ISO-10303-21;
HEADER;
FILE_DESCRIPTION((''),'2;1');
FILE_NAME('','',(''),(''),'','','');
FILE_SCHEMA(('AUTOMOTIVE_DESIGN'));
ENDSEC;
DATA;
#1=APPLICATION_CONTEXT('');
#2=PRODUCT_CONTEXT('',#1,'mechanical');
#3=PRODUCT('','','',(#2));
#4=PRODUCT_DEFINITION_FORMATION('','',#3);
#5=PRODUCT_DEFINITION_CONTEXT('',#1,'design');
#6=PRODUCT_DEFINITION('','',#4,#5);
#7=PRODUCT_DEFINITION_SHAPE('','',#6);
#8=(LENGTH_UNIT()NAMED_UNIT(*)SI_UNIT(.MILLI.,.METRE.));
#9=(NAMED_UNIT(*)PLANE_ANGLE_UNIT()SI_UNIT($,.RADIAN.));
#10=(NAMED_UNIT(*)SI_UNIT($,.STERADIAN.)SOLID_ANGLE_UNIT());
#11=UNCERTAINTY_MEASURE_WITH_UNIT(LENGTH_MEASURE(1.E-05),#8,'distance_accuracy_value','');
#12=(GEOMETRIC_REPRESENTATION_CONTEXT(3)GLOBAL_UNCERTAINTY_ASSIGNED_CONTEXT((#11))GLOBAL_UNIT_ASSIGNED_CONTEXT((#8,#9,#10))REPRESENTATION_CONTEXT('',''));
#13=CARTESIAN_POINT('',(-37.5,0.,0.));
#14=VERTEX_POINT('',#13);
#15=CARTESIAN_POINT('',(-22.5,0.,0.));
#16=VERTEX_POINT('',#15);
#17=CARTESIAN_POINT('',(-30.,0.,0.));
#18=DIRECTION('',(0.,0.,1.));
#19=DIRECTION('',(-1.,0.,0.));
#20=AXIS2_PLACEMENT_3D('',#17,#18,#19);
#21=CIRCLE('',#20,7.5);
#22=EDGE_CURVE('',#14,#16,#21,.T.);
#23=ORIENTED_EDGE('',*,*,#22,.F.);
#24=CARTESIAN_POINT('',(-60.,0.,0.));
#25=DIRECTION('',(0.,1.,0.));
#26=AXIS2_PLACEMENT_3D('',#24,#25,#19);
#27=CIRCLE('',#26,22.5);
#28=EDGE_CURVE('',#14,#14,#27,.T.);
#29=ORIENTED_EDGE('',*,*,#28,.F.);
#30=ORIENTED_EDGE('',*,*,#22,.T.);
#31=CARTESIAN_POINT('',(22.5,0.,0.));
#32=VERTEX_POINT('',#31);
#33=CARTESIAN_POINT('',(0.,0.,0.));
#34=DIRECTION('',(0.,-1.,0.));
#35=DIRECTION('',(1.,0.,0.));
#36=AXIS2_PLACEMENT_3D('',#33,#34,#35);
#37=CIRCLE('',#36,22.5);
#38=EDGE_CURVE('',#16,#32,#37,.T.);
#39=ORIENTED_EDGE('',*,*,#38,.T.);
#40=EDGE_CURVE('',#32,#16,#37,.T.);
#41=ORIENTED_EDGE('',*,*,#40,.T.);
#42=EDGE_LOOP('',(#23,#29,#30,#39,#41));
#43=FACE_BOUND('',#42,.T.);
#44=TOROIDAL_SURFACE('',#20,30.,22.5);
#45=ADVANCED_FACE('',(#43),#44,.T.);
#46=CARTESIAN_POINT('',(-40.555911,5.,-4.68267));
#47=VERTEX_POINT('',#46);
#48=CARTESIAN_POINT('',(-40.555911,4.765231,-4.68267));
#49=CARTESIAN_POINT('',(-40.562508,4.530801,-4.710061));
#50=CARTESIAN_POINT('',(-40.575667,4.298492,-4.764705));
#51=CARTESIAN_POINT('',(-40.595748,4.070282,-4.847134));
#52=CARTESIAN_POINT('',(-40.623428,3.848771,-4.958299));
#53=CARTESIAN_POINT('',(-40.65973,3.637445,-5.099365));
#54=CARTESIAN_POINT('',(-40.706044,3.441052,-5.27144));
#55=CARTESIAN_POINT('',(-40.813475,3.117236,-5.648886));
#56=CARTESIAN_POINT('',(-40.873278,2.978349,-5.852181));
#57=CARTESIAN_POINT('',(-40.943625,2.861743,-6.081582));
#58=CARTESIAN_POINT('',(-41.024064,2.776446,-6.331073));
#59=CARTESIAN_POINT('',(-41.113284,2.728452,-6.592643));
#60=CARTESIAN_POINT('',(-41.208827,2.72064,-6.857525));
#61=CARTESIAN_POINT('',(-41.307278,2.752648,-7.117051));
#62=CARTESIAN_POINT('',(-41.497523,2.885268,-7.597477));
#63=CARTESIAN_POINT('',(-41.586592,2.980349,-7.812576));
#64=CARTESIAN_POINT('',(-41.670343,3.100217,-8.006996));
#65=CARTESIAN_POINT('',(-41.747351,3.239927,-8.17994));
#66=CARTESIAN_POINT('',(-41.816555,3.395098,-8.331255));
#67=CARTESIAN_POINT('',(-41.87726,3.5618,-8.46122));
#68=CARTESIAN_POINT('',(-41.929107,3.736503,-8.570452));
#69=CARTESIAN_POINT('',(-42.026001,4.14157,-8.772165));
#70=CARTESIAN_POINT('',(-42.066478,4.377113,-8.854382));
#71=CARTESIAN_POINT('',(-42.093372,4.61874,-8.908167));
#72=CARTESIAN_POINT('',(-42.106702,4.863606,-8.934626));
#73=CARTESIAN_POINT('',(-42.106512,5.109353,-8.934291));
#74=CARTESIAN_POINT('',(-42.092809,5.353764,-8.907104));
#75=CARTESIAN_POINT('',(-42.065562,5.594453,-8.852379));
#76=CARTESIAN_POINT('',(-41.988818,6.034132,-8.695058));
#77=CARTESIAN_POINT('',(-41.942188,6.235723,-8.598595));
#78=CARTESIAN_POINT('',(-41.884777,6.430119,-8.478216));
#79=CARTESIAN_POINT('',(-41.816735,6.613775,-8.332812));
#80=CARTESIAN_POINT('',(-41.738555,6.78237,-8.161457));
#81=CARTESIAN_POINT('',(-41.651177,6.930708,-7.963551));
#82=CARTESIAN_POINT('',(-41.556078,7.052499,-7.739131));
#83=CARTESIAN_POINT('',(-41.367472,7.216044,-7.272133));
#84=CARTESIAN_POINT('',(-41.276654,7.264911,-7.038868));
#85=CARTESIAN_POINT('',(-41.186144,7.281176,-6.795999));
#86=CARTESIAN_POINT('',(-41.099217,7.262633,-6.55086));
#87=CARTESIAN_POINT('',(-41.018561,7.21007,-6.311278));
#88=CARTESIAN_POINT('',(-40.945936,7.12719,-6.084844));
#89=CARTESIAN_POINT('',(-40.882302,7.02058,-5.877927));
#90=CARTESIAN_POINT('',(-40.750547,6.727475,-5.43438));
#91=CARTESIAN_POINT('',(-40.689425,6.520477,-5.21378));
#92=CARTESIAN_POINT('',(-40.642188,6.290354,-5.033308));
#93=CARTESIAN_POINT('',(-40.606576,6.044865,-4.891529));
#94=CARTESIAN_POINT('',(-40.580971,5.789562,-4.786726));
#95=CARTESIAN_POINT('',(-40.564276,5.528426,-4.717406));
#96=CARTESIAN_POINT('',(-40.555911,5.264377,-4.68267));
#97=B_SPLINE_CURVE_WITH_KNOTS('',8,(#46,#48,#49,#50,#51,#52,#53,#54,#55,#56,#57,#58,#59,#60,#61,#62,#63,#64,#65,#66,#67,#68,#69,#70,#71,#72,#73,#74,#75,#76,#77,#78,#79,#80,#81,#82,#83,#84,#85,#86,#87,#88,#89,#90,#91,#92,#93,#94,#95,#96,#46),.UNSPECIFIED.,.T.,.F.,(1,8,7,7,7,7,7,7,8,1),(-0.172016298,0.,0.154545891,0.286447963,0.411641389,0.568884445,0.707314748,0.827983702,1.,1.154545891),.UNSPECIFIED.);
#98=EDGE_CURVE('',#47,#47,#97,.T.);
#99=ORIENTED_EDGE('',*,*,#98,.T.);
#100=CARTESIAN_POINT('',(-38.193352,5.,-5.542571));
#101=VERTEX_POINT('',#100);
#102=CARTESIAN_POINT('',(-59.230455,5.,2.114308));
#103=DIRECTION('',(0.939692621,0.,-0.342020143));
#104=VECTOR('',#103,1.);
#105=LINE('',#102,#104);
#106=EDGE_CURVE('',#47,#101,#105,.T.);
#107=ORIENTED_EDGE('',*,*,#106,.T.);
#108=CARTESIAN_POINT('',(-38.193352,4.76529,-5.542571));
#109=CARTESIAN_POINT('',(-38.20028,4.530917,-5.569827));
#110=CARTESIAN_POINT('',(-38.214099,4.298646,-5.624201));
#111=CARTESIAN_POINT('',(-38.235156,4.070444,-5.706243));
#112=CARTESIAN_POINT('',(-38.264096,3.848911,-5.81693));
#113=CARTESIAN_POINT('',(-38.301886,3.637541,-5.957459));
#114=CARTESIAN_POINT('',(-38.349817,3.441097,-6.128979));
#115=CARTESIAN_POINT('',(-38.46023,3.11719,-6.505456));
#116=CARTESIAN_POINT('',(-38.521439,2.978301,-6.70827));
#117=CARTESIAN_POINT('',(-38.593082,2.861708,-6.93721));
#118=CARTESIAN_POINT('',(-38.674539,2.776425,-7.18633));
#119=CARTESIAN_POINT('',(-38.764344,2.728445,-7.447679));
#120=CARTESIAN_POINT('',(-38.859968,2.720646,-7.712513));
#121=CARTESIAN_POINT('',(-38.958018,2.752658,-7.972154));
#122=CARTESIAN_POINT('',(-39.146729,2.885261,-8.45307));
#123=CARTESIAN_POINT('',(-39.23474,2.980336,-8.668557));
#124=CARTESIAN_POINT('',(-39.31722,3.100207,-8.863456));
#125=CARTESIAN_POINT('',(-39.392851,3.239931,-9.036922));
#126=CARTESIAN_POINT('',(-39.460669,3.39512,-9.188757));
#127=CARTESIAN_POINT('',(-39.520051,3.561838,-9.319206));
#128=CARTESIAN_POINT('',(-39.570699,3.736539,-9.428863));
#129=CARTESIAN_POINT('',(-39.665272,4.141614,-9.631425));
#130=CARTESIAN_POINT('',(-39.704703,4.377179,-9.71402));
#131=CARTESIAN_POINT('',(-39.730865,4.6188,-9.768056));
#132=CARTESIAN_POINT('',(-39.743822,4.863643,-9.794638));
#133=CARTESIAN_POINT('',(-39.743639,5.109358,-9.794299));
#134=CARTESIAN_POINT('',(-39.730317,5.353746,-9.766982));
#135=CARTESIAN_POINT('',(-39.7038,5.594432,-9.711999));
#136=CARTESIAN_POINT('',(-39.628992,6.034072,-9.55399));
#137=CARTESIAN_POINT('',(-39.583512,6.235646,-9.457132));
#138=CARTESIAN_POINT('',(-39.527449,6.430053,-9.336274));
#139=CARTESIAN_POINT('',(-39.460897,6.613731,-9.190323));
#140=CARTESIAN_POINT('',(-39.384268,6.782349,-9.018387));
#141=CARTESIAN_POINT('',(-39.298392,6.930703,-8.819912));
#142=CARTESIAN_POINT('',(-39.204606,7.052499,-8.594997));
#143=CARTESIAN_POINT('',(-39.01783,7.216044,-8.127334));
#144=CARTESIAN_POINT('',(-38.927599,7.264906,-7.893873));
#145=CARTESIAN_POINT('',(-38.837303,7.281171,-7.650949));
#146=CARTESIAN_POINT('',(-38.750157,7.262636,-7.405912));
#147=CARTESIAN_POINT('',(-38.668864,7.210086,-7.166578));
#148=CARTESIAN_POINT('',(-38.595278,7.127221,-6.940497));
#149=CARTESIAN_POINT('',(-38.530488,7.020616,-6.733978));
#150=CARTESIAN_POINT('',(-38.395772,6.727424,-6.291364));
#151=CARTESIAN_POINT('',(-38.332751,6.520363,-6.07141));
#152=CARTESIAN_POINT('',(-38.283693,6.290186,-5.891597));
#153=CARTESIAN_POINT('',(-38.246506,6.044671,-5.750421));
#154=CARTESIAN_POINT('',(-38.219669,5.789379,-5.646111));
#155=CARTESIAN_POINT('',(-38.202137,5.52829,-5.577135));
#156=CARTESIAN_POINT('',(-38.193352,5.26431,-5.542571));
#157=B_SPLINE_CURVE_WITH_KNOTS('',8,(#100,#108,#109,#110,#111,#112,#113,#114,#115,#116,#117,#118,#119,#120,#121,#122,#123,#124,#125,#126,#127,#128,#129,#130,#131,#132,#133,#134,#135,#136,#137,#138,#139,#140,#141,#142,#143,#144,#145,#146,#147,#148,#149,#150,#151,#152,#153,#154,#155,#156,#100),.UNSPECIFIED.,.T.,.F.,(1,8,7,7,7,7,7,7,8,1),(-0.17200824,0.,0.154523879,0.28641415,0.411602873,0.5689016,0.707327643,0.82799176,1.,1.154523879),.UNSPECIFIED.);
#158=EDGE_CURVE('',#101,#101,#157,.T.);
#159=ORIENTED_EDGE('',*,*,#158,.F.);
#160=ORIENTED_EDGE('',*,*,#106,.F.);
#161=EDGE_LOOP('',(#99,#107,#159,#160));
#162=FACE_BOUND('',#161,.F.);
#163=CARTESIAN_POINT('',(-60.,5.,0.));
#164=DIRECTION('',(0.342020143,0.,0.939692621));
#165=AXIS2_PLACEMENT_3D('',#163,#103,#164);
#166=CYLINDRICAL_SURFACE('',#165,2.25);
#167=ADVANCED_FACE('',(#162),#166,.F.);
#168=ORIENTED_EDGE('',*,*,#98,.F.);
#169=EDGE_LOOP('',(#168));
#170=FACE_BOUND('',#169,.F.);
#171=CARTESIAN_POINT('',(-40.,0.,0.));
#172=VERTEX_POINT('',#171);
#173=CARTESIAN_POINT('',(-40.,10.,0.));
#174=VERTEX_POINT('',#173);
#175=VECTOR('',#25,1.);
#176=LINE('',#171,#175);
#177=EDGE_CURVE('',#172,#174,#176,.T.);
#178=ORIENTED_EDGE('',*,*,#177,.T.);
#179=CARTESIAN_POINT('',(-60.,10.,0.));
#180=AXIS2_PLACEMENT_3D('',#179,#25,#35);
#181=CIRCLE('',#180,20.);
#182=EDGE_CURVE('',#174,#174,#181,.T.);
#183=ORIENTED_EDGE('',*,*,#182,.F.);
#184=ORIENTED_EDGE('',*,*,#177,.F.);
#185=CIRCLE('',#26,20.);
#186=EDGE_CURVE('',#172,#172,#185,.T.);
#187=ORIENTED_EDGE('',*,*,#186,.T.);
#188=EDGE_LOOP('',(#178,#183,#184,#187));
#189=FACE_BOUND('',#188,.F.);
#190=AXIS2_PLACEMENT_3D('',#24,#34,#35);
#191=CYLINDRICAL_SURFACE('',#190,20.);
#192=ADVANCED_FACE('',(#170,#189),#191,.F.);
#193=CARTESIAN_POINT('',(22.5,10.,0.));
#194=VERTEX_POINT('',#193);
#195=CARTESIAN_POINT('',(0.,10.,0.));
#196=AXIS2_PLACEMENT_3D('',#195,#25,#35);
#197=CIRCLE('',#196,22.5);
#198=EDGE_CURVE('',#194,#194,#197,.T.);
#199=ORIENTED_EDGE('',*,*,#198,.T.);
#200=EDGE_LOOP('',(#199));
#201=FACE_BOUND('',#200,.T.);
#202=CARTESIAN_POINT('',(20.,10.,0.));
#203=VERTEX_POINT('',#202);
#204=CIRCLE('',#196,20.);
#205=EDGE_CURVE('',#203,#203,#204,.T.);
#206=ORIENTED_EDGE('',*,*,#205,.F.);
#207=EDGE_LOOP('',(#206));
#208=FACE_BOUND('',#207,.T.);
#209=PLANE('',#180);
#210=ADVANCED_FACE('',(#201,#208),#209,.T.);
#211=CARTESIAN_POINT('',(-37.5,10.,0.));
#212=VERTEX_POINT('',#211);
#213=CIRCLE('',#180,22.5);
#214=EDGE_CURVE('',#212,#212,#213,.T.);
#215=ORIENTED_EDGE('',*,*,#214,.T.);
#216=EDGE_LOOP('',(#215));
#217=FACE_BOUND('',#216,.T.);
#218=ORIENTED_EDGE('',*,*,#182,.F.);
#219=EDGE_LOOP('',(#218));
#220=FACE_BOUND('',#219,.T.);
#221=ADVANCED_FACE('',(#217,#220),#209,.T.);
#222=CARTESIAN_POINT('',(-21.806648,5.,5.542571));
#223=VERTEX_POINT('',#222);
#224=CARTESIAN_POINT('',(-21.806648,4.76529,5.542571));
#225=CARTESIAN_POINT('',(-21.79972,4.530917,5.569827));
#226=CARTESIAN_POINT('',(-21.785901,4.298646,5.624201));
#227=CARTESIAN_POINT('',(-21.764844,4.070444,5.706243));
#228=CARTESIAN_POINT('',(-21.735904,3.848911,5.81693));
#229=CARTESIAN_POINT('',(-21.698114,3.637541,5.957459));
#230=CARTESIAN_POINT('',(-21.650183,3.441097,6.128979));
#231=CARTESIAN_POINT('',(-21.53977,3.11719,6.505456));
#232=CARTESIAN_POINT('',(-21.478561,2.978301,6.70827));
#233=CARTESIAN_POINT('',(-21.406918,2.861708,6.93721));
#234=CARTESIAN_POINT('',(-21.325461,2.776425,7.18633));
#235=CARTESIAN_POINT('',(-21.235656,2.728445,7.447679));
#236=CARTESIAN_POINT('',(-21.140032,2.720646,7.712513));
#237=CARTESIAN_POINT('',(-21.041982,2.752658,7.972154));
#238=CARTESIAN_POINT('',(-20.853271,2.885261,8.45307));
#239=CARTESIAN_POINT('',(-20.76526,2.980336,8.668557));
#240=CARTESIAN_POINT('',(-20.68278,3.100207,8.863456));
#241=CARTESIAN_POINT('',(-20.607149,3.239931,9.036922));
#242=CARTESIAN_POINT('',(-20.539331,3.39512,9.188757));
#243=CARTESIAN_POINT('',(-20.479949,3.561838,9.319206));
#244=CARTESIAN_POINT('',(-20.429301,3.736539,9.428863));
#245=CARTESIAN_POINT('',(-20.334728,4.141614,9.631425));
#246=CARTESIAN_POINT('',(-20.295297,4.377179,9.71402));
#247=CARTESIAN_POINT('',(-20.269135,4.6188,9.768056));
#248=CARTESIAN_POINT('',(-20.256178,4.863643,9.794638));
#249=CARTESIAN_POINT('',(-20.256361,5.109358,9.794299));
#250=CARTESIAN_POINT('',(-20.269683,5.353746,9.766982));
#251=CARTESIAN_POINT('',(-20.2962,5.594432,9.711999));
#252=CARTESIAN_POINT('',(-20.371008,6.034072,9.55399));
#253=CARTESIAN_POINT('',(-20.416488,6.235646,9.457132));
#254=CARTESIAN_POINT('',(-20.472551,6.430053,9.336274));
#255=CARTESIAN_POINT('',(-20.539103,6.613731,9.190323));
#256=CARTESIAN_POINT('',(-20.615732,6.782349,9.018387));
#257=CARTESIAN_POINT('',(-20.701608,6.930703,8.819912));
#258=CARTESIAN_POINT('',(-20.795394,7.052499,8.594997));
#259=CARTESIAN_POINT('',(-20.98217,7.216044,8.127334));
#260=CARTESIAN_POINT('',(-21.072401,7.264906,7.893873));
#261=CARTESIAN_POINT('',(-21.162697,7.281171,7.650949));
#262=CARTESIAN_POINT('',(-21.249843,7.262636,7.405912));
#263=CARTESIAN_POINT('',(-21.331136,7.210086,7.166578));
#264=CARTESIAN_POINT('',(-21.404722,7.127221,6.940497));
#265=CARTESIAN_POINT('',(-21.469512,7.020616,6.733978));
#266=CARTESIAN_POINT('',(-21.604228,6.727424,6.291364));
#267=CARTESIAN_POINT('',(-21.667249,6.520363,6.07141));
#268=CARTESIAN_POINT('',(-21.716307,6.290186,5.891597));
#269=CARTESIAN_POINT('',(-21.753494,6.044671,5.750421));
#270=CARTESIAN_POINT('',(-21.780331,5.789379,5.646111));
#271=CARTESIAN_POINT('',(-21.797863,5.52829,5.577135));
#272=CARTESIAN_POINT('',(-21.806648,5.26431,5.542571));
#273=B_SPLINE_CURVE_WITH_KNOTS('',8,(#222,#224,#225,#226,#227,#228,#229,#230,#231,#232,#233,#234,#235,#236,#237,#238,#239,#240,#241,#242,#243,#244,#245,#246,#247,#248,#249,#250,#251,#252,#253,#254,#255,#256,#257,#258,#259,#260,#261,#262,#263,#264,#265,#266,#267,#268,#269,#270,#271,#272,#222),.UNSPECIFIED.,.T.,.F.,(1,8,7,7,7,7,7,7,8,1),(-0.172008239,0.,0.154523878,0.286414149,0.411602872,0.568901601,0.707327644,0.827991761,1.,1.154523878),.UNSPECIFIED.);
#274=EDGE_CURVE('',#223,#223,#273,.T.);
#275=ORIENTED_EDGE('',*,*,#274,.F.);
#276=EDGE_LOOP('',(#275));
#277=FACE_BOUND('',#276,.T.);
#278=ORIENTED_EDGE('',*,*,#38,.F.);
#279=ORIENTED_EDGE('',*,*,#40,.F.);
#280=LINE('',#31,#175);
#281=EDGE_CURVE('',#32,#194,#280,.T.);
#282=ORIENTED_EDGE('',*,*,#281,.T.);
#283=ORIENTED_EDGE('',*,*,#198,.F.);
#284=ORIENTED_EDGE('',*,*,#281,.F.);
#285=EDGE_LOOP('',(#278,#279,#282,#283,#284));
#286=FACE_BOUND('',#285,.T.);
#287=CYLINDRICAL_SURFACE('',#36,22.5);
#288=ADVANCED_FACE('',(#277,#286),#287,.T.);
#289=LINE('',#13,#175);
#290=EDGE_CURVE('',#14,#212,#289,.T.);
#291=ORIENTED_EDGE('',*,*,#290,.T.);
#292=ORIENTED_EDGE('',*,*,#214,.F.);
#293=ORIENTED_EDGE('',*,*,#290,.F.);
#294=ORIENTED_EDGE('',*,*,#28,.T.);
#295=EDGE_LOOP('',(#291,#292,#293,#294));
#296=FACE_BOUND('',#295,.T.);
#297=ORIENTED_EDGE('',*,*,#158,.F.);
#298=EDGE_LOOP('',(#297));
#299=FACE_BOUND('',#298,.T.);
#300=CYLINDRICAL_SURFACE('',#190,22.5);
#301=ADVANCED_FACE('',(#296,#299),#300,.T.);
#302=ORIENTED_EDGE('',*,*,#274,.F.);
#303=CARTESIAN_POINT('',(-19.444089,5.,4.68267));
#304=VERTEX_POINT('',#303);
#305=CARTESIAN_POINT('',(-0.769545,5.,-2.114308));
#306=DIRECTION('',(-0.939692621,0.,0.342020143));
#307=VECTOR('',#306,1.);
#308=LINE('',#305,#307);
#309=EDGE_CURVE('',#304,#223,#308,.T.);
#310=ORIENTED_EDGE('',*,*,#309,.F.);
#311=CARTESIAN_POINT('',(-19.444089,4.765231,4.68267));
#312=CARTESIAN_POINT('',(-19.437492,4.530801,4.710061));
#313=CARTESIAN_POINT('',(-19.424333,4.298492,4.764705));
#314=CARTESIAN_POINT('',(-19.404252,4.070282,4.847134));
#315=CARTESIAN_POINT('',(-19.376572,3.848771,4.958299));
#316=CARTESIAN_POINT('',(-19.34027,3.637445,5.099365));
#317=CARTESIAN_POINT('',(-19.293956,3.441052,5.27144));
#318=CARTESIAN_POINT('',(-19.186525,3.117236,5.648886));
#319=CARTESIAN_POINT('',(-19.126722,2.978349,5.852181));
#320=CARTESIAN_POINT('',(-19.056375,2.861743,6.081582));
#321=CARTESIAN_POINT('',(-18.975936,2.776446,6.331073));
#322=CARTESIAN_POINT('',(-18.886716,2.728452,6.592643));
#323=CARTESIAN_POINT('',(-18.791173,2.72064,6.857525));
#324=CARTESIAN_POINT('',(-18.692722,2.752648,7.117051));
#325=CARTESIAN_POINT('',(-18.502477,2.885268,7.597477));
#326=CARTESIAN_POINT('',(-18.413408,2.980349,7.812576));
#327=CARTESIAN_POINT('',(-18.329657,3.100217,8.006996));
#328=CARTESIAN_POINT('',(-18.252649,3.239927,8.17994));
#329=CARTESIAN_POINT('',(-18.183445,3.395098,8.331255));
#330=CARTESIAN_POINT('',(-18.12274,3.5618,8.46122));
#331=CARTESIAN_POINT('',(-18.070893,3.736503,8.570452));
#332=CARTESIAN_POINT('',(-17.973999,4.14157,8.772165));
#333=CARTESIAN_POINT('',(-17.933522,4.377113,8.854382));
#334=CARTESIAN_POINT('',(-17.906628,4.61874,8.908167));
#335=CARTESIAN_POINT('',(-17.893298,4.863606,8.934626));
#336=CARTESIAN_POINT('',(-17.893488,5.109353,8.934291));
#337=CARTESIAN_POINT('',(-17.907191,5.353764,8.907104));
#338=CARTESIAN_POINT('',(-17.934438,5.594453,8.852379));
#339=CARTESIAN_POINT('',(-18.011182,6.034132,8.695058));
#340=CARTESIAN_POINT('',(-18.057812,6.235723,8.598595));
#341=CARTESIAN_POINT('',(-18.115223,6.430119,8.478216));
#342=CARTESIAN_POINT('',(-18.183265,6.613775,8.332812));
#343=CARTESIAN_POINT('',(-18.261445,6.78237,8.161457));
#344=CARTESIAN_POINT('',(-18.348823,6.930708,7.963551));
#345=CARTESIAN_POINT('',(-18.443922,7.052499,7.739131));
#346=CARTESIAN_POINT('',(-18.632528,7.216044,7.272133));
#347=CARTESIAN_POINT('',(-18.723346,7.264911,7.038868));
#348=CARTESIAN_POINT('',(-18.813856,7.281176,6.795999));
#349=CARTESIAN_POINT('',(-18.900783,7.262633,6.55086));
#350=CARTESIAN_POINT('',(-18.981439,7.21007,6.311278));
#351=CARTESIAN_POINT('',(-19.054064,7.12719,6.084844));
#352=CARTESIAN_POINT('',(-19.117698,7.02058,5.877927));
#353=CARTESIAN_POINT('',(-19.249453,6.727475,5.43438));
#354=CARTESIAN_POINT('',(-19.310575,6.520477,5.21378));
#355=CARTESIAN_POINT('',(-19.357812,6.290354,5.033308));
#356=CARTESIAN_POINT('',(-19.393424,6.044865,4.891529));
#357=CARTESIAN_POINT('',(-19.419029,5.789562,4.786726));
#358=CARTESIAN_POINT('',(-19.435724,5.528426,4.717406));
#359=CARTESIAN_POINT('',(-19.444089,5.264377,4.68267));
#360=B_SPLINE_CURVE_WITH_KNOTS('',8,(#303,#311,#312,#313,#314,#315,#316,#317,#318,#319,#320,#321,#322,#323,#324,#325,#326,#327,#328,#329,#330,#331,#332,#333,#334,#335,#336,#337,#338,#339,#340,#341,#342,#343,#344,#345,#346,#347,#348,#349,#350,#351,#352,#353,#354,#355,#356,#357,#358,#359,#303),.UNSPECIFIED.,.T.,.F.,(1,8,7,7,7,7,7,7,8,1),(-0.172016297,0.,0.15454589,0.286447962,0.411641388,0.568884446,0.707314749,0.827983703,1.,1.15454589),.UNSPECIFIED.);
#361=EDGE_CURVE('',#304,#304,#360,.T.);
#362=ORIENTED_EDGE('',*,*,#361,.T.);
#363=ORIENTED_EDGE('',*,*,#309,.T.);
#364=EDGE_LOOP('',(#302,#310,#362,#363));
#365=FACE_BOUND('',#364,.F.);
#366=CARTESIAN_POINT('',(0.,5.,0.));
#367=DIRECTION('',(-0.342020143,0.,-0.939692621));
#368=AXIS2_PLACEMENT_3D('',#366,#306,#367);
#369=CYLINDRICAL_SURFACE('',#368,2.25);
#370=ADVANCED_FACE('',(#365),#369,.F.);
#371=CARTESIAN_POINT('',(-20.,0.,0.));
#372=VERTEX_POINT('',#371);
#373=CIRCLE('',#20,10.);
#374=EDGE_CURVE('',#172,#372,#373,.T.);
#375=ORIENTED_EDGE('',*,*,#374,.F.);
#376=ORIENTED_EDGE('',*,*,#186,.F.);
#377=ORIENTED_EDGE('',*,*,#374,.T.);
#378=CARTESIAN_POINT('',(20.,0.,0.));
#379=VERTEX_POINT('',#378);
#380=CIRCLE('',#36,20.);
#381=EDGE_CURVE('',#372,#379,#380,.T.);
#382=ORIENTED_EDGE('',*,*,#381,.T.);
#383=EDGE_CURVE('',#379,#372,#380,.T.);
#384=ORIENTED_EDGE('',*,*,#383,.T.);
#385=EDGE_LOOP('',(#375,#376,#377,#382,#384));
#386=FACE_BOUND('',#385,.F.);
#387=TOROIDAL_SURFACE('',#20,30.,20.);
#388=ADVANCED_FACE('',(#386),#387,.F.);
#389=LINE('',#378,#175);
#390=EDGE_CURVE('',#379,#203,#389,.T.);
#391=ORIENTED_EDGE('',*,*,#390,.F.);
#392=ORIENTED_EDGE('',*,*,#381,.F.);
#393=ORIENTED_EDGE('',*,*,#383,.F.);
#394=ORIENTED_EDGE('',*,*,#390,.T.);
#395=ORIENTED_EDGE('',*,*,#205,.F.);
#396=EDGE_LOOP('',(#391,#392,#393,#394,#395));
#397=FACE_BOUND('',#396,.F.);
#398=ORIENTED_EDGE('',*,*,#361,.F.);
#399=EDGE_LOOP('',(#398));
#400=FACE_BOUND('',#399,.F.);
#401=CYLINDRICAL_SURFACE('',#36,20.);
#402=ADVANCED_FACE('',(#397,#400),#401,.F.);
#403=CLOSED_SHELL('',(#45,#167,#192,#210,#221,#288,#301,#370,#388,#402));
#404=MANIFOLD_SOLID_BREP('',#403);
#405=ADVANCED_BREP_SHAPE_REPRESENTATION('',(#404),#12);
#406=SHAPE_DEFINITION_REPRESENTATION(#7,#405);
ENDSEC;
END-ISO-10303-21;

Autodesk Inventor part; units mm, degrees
ref_plane "XZ Plane" through (0, 0, 0) normal (0, 1, 0) x (-1, 0, 0)
ref_plane "XY Plane" through (0, 0, 0) normal (0, 0, 1) x (1, 0, 0)
sketch "Sketch1" plane through (0, 0, 0) normal (0, 1, 0) x (-1, 0, 0)
  circle A0 centre (0, 0) radius 20
  circle A1 centre (0, 0) radius 22.5
  dimension "d0" = 40
  dimension "d1" = 45
sketch "Sketch2" plane through (0, 0, 0) normal (0, 0, 1) x (1, 0, 0)
  arc A0 (-60, 0) -> (0, 0) centre (-30, 0) ccw
  dimension "d8" = 30
sweep "Sweep2" add profiles "Sketch1" path "Sketch2"
sketch "Sketch3" plane through (-60, 0, 0) normal (0, 1, 0) x (1, 0, 0)
  circle A0 centre (0, 0) radius 20 projected
  circle A1 centre (0, 0) radius 22.5 projected
  circle A2 centre (60, 0) radius 20 projected
  circle A3 centre (60, 0) radius 22.5 projected
extrude "Extrusion1" add sketch "Sketch3" along normal blind 10
ref_plane "Work Plane1" through (0, 0, 0) normal (0.9396926, 0, -0.3420201) x (0, 1, 0)
sketch "Sketch4" plane through (0, 0, 0) normal (0.9396926, 0, -0.3420201) x (0, 1, 0)
  line L0 (10, -22.5) -> (10, 22.5) projected
  line L1 (0, 22.5) -> (0, -22.5) projected
  point P0 (0, 0)
  point P1 (5, 0)
  dimension "d14" = 5
  dimension "d15" = 22.5
  dimension "d16" = 22.5
hole "Hole1" at (0, 5, 0) direction (-0.9396926, 0, 0.3420201) diameter 4.5 end up to surface
sketch "Sketch5" plane through (-60, 10, 0) normal (0, 1, 0) x (1, 0, 0)
  point P0 (60, 0)
  point P1 (0, 0)
  point P2 (0, 0)
ref_plane "Work Plane2" through (-60, 10, 0) normal (0.9396926, 0, -0.3420201) x (0, 1, 0)
sketch "Sketch6" plane through (-60, 10, 0) normal (0.9396926, 0, -0.3420201) x (0, 1, 0)
  line L0 (0, -22.5) -> (0, 22.5) projected
  line L1 (-10, -22.5) -> (-10, 22.5) projected
  line L2 (-10, -22.5) -> (0, -22.5) projected
  line L3 (-10, 22.5) -> (0, 22.5) projected
  point P0 (-10, 20.5212)
  point P1 (-5, 0)
  dimension "d24" = 5
  dimension "d25" = 22.5
  dimension "d26" = 22.5
hole "Hole2" at (-60, 5, 0) direction (0.9396926, 0, -0.3420201) diameter 4.5 end up to surface
equation "\"d15\" = d16"
equation "\"d25\" = d26"
properties part number "Pancake_Flexi Pipe" material "PMMA Plastic"
